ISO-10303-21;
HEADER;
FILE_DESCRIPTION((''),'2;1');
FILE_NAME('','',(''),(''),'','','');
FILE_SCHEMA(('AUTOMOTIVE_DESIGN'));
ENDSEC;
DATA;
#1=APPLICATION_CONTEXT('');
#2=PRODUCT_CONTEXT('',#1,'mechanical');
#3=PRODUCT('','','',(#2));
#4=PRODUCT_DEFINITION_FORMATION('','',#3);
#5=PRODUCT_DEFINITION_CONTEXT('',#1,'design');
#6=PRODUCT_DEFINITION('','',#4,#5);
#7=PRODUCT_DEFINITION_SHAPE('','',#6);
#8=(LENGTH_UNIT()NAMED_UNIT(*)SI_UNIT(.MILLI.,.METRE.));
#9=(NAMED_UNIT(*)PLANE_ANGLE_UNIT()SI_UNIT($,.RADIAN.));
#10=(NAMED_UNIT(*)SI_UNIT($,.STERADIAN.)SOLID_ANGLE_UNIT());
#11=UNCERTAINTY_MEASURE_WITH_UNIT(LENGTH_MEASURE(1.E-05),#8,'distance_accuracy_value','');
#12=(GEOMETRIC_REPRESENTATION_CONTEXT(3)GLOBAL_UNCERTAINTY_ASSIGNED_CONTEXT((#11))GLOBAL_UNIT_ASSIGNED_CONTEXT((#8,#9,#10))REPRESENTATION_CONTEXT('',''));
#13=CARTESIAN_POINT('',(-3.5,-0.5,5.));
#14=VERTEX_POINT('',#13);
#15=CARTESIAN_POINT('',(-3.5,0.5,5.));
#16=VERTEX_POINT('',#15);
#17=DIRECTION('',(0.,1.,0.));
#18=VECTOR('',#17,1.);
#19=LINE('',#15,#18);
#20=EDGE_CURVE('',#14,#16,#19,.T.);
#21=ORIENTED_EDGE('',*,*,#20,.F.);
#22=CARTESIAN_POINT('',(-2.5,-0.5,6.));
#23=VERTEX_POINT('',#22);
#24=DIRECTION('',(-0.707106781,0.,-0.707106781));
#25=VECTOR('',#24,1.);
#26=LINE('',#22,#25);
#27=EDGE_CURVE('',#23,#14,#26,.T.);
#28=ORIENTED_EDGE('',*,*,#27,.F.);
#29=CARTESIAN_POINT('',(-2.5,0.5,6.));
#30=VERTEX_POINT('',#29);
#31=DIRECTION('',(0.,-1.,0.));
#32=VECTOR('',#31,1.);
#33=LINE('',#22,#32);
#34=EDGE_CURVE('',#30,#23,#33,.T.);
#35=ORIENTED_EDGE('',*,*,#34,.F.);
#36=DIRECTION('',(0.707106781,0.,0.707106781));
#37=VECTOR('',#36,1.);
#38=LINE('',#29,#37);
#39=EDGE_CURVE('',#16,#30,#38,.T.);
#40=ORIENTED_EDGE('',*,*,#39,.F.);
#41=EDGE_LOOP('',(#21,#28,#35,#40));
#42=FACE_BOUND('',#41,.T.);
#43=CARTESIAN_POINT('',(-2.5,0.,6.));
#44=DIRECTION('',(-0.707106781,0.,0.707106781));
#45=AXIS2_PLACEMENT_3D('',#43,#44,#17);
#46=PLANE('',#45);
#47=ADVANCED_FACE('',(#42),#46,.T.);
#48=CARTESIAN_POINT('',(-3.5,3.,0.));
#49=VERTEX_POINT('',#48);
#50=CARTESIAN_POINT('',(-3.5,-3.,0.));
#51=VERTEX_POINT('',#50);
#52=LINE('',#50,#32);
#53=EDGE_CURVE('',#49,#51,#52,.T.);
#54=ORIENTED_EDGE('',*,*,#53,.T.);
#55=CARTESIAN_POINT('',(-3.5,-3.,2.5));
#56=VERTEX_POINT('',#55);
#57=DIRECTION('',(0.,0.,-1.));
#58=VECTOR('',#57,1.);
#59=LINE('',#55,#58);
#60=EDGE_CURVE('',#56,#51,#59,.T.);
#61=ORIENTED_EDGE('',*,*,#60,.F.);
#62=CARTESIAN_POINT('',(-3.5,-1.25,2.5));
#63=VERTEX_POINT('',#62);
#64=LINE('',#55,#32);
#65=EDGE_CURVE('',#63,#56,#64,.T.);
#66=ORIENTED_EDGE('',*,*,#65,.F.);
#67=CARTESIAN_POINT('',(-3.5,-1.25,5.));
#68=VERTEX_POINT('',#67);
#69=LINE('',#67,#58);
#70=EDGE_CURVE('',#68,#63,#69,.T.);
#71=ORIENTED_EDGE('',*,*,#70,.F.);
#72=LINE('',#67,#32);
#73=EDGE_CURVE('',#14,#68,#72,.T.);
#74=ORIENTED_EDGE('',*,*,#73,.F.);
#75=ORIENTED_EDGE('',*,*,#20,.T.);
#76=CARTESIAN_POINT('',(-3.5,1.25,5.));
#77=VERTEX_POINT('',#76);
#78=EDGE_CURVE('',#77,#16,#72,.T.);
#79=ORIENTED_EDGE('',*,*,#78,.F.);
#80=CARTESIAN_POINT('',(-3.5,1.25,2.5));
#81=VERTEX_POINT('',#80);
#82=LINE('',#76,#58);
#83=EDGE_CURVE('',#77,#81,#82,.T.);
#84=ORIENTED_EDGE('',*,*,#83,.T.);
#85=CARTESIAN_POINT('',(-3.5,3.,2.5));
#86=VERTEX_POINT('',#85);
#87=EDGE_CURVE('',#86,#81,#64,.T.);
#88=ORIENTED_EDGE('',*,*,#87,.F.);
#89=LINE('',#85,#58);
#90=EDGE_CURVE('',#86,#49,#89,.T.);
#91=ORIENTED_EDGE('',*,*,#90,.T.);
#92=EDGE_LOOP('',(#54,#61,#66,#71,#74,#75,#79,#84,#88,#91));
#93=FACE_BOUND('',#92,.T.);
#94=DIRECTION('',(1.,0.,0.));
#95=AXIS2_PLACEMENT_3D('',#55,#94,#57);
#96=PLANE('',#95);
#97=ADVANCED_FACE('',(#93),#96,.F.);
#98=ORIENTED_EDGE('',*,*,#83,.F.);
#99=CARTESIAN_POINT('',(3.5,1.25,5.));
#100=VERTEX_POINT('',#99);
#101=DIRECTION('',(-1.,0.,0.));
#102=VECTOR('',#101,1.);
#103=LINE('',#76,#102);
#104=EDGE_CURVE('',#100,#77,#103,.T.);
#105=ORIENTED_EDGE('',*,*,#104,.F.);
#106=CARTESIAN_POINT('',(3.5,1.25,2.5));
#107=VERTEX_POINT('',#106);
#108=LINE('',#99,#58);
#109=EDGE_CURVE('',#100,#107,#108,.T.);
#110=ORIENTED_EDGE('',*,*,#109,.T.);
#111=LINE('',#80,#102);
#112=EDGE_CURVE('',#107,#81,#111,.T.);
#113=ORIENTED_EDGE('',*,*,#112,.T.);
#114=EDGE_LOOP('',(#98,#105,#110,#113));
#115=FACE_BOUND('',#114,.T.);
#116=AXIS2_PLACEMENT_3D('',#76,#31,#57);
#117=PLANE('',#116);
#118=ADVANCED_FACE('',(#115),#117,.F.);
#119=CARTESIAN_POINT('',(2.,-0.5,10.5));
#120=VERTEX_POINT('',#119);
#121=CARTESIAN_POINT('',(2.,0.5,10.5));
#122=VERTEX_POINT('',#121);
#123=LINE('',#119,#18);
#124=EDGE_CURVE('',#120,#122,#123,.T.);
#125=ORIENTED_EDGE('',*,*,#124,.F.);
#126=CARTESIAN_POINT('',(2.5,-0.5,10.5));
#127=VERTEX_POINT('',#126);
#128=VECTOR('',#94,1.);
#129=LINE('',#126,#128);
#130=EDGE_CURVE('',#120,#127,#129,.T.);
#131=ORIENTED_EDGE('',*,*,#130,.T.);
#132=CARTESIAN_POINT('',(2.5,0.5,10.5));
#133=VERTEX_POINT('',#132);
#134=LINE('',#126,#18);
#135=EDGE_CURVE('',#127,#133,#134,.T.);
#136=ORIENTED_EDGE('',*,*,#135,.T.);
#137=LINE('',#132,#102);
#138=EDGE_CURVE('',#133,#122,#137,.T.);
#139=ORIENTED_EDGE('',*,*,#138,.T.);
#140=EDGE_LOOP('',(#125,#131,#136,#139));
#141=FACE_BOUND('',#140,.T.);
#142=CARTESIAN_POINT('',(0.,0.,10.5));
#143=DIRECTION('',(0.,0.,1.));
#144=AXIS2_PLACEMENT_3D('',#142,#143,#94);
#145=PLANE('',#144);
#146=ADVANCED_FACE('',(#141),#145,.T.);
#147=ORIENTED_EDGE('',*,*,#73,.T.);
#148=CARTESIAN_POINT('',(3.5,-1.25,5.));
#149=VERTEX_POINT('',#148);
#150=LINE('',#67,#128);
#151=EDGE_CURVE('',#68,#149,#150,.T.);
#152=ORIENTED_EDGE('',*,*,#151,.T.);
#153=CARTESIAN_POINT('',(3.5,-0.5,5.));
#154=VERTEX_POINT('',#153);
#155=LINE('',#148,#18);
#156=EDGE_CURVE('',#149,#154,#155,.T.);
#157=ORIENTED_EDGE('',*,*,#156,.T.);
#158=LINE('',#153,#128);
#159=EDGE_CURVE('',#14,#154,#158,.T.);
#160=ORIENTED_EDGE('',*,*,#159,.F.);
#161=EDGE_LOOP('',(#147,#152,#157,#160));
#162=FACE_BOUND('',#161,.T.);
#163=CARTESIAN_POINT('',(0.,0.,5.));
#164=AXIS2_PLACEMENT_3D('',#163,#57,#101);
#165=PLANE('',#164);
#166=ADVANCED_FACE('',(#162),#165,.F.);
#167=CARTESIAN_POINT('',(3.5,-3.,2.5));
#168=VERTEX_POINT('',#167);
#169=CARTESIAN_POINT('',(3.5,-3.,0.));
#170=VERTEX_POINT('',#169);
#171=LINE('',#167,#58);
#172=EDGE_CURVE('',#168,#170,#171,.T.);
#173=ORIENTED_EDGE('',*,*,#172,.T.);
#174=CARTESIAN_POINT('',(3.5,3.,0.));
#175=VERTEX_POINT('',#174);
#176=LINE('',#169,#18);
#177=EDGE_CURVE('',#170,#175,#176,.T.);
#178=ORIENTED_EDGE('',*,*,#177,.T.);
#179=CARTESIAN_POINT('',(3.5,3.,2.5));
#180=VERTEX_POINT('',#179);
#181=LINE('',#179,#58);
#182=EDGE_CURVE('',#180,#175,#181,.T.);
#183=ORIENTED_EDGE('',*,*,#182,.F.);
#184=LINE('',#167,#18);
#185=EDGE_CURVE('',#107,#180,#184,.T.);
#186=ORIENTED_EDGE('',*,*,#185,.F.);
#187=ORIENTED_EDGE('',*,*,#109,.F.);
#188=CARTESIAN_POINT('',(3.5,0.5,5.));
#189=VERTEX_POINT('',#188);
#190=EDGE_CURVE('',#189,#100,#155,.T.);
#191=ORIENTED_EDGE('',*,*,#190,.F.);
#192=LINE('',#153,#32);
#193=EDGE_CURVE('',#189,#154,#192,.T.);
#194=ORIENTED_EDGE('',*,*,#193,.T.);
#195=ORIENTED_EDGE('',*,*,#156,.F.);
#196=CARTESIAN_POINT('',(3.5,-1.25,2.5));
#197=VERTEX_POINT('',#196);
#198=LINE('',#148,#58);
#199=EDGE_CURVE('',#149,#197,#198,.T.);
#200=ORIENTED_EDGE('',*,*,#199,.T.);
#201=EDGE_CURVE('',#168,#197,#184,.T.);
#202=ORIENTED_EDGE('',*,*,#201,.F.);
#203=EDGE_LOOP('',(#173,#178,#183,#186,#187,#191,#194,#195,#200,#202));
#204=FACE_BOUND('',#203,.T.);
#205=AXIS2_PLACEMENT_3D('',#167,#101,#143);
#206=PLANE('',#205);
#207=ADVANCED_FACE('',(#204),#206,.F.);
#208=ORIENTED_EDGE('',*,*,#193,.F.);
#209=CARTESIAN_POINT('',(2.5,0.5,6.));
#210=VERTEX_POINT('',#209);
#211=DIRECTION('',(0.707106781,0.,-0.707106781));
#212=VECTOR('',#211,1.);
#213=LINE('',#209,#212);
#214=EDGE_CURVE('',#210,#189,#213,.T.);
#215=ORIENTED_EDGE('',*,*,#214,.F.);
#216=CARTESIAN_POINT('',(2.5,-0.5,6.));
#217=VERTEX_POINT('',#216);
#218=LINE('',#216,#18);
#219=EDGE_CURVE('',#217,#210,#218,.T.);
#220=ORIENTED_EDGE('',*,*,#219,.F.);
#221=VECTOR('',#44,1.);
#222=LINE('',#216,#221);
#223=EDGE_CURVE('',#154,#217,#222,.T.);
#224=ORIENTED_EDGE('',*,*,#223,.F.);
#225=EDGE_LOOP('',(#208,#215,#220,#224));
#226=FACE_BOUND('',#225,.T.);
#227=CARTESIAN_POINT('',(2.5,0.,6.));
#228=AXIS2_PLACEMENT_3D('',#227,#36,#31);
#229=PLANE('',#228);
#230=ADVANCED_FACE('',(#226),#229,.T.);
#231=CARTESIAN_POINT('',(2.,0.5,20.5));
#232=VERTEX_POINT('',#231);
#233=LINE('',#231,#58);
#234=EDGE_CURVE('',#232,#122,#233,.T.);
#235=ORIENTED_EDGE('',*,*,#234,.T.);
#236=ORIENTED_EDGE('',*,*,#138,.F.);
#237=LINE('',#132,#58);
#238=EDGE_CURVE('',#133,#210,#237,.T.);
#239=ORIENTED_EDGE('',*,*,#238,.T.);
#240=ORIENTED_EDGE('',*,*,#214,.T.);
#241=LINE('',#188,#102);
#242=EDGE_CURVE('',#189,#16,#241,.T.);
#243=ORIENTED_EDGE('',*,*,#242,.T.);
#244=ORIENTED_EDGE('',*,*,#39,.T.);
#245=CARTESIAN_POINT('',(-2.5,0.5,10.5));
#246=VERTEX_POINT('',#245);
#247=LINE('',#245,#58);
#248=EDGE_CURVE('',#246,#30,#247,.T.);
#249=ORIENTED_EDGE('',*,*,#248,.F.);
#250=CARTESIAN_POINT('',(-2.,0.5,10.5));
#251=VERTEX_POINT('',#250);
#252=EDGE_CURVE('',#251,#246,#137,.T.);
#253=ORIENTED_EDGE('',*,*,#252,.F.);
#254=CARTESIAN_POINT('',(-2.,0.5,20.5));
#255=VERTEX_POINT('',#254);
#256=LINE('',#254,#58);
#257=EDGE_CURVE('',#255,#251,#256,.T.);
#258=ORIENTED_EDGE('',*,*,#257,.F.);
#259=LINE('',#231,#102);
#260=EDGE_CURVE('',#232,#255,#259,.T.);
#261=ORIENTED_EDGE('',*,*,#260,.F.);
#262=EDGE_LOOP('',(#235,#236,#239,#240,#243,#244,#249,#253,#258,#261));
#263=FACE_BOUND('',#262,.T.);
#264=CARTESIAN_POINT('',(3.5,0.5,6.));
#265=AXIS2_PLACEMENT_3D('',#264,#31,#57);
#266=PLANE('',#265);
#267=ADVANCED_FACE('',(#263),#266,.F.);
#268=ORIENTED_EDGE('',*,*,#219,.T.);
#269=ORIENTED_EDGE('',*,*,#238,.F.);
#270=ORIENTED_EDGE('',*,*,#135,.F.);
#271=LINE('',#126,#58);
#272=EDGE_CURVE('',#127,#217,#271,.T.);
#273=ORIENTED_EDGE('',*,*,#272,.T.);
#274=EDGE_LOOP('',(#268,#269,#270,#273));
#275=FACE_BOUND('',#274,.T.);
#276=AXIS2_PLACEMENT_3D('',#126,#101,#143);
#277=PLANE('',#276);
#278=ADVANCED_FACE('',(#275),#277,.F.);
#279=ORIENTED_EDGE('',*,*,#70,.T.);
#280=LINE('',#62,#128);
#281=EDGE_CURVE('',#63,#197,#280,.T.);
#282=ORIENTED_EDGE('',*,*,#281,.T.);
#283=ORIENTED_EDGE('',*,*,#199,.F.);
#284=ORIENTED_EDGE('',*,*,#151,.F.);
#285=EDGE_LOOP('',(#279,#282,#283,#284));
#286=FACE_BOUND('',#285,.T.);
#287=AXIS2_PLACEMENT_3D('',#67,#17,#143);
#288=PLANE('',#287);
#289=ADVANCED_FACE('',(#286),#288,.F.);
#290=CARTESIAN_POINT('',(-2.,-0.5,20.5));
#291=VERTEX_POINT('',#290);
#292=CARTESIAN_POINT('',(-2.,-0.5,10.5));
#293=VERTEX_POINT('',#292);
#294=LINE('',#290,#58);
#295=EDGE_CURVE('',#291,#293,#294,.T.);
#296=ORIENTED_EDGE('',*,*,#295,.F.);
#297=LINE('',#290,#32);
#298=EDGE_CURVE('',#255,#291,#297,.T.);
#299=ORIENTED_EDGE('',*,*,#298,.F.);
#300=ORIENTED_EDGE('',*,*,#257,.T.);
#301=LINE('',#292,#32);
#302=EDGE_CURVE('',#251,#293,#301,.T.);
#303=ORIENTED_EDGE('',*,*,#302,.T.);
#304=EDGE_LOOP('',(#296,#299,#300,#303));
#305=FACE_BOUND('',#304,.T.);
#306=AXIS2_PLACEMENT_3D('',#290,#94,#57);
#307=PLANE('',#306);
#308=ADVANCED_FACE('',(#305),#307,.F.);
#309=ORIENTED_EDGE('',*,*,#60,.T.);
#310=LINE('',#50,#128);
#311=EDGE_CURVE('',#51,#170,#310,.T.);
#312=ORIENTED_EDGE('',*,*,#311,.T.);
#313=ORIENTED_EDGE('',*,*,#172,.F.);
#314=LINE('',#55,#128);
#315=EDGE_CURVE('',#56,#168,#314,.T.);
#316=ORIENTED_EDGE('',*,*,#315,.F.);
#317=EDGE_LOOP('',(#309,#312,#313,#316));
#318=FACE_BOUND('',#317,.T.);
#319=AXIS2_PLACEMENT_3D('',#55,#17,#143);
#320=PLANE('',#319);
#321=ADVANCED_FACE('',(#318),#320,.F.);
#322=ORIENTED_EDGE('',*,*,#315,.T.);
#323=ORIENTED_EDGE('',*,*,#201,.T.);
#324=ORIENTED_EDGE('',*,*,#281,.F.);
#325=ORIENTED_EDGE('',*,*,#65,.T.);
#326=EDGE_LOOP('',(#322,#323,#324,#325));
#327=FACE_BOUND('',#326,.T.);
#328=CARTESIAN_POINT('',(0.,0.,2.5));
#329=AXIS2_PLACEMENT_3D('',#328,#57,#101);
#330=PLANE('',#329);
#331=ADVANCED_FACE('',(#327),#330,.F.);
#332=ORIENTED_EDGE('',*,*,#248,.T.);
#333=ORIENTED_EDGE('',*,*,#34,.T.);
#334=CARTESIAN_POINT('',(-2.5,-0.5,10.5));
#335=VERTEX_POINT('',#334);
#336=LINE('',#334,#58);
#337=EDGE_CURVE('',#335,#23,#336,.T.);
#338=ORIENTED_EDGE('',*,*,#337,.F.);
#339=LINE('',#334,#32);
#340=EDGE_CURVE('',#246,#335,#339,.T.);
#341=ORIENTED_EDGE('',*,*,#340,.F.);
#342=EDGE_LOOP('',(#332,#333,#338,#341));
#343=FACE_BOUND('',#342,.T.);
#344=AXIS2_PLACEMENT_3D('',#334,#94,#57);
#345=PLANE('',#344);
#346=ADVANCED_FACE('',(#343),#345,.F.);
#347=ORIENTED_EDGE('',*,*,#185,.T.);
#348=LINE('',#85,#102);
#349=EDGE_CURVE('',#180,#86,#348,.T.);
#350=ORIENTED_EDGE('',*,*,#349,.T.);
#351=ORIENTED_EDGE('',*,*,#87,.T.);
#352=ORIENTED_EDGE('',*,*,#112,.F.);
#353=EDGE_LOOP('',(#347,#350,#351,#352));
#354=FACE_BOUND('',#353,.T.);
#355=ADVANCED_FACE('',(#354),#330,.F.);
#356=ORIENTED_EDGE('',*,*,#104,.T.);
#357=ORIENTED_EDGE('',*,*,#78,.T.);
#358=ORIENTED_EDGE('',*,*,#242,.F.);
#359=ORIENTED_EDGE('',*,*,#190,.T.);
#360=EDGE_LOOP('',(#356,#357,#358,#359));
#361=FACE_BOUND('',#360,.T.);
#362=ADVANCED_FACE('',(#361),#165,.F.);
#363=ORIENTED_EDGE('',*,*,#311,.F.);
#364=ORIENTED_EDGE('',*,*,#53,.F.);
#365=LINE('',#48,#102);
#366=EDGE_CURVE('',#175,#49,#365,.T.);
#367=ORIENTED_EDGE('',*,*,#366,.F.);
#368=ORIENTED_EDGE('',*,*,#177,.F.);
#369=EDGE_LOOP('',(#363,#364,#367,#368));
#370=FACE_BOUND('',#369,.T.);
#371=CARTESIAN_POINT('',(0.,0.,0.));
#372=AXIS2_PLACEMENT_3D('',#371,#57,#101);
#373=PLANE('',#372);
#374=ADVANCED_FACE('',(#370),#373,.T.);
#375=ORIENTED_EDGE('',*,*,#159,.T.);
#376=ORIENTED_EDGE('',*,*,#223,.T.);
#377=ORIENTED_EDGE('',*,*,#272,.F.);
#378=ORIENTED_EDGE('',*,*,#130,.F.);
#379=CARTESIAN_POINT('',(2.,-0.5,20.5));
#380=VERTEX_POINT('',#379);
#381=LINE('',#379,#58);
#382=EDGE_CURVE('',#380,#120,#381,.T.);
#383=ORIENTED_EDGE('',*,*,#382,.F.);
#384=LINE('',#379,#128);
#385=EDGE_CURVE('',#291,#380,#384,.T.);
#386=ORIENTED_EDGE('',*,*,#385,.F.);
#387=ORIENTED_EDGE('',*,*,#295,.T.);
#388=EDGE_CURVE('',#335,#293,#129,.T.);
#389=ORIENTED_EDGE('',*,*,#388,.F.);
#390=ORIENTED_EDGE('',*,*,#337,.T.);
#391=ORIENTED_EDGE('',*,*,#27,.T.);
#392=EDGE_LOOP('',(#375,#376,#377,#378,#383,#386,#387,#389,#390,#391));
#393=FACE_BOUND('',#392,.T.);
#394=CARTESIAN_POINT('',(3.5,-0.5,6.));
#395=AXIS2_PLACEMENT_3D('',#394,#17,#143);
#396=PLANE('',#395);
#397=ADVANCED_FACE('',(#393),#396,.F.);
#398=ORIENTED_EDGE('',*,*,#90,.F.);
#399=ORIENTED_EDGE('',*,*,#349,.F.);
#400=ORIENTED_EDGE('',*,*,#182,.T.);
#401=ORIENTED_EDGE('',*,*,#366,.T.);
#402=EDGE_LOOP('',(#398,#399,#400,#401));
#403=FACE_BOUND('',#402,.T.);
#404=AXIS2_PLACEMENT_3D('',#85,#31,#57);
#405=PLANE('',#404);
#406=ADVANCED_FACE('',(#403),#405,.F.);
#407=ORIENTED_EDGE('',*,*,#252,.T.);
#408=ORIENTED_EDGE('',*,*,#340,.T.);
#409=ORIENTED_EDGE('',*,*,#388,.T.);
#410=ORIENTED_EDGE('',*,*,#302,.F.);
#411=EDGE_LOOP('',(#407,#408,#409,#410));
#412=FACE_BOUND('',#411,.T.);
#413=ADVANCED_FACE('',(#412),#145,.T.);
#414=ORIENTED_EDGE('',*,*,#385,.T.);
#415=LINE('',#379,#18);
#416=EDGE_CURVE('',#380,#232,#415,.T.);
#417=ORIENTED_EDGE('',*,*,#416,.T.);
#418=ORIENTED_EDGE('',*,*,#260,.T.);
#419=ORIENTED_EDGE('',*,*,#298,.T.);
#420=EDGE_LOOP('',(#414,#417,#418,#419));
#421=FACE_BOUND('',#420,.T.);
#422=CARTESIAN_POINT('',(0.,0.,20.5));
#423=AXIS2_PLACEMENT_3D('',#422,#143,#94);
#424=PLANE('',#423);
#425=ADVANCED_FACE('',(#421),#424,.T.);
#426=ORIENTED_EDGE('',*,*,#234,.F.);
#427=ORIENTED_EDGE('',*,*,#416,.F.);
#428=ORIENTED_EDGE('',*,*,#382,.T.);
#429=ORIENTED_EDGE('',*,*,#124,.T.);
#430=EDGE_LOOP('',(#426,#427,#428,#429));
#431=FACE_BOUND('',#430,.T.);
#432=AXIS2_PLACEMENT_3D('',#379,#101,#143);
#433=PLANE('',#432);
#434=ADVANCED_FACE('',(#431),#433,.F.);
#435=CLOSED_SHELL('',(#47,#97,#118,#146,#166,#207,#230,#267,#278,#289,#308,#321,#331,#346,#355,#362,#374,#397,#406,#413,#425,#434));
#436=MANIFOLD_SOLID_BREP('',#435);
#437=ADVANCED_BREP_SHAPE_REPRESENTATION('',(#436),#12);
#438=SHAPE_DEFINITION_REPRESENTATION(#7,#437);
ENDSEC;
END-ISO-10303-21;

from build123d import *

# Parameters (mm, degrees)
SKETCH_1_W      = 7
SKETCH_1_H      = 6
EXTRUDE_1_DEPTH = 2.5
SKETCH_2_W      = 7
SKETCH_2_H      = 2.5
EXTRUDE_2_DEPTH = 2.5
SKETCH_3_W      = 7
SKETCH_3_H      = 1
EXTRUDE_3_DEPTH = 1
SKETCH_4_W      = 5
SKETCH_4_H      = 1
EXTRUDE_4_DEPTH = 4.5
SKETCH_5_W      = 4
SKETCH_5_H      = 1
EXTRUDE_5_DEPTH = 10
CHAMFER_1_SIZE  = 1


with BuildPart() as part:
    # 스케치1 → 보스-돌출1 (new body)
    with BuildSketch(Plane.XY):
        Rectangle(SKETCH_1_W, SKETCH_1_H)
    extrude(amount=EXTRUDE_1_DEPTH)

    # 스케치2 → 보스-돌출2 (add)
    with BuildSketch(Plane.XY.offset(2.5)):
        Rectangle(SKETCH_2_W, SKETCH_2_H)
    extrude(amount=EXTRUDE_2_DEPTH)

    # 스케치3 → 보스-돌출3 (add)
    with BuildSketch(Plane.XY.offset(5)):
        Rectangle(SKETCH_3_W, SKETCH_3_H)
    extrude(amount=EXTRUDE_3_DEPTH)

    # 스케치4 → 보스-돌출4 (add)
    with BuildSketch(Plane.XY.offset(6)):
        Rectangle(SKETCH_4_W, SKETCH_4_H)
    extrude(amount=EXTRUDE_4_DEPTH)

    # 스케치5 → 보스-돌출5 (add)
    with BuildSketch(Plane.XY.offset(10.5)):
        Rectangle(SKETCH_5_W, SKETCH_5_H)
    extrude(amount=EXTRUDE_5_DEPTH)

    # 모따기1
    chamfer_1_edges = [part.edges().sort_by_distance(p)[0] for p in [
        (3.5, 0, 6),
        (-3.5, 0, 6),
    ]]
    chamfer(chamfer_1_edges, length=CHAMFER_1_SIZE - 0.0001)  # a hair under: the kernel refuses the full size


solid = part.part
